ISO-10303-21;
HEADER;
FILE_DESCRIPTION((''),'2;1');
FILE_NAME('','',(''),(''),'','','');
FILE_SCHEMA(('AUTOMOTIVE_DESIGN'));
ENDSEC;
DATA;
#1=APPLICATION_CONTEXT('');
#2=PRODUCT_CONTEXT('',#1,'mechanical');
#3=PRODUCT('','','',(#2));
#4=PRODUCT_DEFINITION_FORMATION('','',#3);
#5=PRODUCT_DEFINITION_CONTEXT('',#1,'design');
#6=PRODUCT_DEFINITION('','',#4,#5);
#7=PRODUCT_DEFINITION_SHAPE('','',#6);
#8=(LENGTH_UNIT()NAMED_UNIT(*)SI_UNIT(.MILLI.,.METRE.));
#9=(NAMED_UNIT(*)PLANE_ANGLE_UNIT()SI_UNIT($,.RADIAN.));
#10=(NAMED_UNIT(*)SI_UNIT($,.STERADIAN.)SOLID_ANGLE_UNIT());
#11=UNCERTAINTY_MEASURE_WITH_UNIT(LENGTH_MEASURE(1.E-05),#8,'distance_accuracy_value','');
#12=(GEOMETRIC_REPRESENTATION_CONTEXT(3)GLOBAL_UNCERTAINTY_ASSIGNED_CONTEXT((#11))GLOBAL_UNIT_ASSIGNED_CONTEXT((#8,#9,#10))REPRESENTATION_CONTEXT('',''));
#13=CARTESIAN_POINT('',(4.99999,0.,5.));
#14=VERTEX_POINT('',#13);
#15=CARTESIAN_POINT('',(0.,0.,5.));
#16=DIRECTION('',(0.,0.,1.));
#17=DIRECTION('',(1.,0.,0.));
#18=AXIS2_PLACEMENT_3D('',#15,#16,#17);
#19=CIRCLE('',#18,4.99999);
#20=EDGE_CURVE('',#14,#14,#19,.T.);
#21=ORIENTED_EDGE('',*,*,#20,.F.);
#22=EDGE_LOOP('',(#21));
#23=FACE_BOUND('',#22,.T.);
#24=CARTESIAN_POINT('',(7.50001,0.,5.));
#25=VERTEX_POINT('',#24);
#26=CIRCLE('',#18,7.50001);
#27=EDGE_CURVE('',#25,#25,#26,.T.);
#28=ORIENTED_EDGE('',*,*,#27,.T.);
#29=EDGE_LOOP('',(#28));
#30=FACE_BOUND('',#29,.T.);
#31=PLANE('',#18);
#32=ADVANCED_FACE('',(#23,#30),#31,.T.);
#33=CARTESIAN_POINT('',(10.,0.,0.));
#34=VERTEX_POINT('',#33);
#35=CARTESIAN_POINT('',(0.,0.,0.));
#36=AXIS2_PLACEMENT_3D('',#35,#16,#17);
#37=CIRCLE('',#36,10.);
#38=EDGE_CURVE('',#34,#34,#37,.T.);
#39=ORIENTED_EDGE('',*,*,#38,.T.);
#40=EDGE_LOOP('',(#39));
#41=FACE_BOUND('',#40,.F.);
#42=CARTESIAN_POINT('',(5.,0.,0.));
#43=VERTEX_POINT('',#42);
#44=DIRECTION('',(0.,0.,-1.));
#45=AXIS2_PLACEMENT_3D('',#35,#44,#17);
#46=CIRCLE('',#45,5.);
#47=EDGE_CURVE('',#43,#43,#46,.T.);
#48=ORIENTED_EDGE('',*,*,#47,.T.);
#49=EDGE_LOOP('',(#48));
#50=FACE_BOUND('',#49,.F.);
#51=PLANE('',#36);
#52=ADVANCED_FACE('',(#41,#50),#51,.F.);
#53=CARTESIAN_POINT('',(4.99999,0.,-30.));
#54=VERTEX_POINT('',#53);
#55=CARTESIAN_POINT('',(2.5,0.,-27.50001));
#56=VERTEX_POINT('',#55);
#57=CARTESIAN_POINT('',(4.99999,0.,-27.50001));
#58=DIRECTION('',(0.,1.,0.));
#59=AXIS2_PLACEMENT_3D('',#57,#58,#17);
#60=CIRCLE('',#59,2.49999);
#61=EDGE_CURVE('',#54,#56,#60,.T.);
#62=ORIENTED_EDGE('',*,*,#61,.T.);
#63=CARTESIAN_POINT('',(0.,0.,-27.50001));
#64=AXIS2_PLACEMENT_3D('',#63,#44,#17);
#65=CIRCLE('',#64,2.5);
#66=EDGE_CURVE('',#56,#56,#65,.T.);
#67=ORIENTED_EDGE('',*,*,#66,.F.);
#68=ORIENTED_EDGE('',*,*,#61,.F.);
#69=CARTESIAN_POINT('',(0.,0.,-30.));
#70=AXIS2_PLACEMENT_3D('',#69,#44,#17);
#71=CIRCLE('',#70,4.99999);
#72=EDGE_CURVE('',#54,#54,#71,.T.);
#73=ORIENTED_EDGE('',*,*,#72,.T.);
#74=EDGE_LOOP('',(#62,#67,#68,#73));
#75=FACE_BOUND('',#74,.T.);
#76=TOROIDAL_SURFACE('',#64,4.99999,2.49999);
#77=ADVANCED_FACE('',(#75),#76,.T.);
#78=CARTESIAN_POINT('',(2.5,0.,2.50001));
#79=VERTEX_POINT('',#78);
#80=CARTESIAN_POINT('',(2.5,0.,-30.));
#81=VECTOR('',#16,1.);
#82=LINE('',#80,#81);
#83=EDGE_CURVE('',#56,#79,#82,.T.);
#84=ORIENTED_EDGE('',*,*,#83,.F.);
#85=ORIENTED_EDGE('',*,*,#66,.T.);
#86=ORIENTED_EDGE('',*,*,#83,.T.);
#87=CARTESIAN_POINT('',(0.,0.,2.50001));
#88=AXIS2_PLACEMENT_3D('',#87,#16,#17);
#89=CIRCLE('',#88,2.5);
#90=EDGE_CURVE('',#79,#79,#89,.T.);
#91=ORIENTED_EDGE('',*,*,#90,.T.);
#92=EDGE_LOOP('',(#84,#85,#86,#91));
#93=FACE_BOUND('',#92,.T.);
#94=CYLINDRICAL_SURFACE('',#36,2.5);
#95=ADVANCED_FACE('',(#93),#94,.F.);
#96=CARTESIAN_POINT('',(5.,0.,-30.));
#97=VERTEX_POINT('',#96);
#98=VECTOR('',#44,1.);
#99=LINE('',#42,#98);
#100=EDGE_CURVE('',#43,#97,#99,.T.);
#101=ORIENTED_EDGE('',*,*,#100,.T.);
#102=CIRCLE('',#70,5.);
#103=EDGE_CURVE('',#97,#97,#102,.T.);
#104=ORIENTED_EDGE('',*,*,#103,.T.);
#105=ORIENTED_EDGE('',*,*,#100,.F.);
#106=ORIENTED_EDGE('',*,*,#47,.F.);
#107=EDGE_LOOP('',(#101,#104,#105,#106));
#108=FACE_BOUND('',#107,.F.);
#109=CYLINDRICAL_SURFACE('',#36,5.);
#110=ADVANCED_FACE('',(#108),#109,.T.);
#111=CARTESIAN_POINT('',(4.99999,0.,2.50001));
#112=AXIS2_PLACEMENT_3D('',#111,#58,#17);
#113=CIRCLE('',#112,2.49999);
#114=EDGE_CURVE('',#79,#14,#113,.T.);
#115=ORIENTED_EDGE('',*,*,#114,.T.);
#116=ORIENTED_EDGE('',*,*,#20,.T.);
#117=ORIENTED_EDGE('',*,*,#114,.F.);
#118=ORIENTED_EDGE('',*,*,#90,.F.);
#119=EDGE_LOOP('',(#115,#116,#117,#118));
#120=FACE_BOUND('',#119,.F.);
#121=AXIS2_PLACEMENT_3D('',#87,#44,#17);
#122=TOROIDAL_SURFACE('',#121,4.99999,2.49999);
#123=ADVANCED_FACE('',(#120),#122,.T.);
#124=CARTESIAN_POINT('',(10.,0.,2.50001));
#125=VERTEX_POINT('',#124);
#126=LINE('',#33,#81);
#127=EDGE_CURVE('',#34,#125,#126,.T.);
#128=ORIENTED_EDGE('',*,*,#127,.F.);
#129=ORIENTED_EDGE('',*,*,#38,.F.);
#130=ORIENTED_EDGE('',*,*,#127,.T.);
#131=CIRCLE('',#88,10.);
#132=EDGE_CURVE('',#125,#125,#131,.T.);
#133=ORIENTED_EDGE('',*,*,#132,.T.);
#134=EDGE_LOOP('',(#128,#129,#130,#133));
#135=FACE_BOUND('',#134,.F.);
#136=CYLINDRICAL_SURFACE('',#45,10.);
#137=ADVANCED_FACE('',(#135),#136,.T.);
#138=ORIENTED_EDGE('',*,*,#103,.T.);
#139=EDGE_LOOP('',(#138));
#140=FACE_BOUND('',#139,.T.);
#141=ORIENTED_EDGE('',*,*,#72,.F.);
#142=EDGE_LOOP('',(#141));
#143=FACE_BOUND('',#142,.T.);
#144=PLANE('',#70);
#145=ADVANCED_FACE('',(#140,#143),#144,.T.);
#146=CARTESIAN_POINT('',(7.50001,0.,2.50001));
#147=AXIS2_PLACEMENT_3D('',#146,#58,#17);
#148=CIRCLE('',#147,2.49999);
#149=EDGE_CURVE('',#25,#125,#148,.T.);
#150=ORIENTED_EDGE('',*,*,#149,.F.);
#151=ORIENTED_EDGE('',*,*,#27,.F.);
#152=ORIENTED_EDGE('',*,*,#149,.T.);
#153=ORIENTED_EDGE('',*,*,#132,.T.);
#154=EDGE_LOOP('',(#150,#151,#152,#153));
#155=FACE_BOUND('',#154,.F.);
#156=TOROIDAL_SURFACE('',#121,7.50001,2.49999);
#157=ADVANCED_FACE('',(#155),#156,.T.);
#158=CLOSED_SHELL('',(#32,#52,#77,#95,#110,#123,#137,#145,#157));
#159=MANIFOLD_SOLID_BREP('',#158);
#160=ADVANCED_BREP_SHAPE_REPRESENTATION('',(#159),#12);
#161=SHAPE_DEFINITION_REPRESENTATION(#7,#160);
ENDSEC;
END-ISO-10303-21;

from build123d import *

# Parameters (mm, degrees)
F0_R     = 10
F0_R_2   = 2.5
F1_DEPTH = 5
F2_R     = 5
F2_R_2   = 2.5
F3_DEPTH = 30
F4_R     = 2.49999


# Not quite as in the source:
# - a fillet or chamfer is up to 0.001 mm smaller than in the source, because OpenCascade refuses the exact size


with BuildPart() as f1:
    # F0 (on Top) → F1 (new body)
    with BuildSketch(Plane.XY):
        Circle(F0_R)
        Circle(F0_R_2, mode=Mode.SUBTRACT)
    extrude(amount=F1_DEPTH)

    # F2 (on face) → F3 (join)
    with BuildSketch(Plane(origin=(0, 0, 0), x_dir=(1, 0, 0), z_dir=(0, 0, -1))):
        Circle(F2_R)
        Circle(F2_R_2, mode=Mode.SUBTRACT)
    extrude(amount=F3_DEPTH)

    # F4 (radius 2.5 in the source; OpenCascade refuses exactly that, so slightly less here)
    f4_edges = [f1.edges().sort_by_distance(p)[0] for p in [
        (-10, 0, 5),
        (-2.5, 0, 5),
        (-2.5, 0, -30),
    ]]
    fillet(f4_edges, radius=F4_R)


solid = f1.part
